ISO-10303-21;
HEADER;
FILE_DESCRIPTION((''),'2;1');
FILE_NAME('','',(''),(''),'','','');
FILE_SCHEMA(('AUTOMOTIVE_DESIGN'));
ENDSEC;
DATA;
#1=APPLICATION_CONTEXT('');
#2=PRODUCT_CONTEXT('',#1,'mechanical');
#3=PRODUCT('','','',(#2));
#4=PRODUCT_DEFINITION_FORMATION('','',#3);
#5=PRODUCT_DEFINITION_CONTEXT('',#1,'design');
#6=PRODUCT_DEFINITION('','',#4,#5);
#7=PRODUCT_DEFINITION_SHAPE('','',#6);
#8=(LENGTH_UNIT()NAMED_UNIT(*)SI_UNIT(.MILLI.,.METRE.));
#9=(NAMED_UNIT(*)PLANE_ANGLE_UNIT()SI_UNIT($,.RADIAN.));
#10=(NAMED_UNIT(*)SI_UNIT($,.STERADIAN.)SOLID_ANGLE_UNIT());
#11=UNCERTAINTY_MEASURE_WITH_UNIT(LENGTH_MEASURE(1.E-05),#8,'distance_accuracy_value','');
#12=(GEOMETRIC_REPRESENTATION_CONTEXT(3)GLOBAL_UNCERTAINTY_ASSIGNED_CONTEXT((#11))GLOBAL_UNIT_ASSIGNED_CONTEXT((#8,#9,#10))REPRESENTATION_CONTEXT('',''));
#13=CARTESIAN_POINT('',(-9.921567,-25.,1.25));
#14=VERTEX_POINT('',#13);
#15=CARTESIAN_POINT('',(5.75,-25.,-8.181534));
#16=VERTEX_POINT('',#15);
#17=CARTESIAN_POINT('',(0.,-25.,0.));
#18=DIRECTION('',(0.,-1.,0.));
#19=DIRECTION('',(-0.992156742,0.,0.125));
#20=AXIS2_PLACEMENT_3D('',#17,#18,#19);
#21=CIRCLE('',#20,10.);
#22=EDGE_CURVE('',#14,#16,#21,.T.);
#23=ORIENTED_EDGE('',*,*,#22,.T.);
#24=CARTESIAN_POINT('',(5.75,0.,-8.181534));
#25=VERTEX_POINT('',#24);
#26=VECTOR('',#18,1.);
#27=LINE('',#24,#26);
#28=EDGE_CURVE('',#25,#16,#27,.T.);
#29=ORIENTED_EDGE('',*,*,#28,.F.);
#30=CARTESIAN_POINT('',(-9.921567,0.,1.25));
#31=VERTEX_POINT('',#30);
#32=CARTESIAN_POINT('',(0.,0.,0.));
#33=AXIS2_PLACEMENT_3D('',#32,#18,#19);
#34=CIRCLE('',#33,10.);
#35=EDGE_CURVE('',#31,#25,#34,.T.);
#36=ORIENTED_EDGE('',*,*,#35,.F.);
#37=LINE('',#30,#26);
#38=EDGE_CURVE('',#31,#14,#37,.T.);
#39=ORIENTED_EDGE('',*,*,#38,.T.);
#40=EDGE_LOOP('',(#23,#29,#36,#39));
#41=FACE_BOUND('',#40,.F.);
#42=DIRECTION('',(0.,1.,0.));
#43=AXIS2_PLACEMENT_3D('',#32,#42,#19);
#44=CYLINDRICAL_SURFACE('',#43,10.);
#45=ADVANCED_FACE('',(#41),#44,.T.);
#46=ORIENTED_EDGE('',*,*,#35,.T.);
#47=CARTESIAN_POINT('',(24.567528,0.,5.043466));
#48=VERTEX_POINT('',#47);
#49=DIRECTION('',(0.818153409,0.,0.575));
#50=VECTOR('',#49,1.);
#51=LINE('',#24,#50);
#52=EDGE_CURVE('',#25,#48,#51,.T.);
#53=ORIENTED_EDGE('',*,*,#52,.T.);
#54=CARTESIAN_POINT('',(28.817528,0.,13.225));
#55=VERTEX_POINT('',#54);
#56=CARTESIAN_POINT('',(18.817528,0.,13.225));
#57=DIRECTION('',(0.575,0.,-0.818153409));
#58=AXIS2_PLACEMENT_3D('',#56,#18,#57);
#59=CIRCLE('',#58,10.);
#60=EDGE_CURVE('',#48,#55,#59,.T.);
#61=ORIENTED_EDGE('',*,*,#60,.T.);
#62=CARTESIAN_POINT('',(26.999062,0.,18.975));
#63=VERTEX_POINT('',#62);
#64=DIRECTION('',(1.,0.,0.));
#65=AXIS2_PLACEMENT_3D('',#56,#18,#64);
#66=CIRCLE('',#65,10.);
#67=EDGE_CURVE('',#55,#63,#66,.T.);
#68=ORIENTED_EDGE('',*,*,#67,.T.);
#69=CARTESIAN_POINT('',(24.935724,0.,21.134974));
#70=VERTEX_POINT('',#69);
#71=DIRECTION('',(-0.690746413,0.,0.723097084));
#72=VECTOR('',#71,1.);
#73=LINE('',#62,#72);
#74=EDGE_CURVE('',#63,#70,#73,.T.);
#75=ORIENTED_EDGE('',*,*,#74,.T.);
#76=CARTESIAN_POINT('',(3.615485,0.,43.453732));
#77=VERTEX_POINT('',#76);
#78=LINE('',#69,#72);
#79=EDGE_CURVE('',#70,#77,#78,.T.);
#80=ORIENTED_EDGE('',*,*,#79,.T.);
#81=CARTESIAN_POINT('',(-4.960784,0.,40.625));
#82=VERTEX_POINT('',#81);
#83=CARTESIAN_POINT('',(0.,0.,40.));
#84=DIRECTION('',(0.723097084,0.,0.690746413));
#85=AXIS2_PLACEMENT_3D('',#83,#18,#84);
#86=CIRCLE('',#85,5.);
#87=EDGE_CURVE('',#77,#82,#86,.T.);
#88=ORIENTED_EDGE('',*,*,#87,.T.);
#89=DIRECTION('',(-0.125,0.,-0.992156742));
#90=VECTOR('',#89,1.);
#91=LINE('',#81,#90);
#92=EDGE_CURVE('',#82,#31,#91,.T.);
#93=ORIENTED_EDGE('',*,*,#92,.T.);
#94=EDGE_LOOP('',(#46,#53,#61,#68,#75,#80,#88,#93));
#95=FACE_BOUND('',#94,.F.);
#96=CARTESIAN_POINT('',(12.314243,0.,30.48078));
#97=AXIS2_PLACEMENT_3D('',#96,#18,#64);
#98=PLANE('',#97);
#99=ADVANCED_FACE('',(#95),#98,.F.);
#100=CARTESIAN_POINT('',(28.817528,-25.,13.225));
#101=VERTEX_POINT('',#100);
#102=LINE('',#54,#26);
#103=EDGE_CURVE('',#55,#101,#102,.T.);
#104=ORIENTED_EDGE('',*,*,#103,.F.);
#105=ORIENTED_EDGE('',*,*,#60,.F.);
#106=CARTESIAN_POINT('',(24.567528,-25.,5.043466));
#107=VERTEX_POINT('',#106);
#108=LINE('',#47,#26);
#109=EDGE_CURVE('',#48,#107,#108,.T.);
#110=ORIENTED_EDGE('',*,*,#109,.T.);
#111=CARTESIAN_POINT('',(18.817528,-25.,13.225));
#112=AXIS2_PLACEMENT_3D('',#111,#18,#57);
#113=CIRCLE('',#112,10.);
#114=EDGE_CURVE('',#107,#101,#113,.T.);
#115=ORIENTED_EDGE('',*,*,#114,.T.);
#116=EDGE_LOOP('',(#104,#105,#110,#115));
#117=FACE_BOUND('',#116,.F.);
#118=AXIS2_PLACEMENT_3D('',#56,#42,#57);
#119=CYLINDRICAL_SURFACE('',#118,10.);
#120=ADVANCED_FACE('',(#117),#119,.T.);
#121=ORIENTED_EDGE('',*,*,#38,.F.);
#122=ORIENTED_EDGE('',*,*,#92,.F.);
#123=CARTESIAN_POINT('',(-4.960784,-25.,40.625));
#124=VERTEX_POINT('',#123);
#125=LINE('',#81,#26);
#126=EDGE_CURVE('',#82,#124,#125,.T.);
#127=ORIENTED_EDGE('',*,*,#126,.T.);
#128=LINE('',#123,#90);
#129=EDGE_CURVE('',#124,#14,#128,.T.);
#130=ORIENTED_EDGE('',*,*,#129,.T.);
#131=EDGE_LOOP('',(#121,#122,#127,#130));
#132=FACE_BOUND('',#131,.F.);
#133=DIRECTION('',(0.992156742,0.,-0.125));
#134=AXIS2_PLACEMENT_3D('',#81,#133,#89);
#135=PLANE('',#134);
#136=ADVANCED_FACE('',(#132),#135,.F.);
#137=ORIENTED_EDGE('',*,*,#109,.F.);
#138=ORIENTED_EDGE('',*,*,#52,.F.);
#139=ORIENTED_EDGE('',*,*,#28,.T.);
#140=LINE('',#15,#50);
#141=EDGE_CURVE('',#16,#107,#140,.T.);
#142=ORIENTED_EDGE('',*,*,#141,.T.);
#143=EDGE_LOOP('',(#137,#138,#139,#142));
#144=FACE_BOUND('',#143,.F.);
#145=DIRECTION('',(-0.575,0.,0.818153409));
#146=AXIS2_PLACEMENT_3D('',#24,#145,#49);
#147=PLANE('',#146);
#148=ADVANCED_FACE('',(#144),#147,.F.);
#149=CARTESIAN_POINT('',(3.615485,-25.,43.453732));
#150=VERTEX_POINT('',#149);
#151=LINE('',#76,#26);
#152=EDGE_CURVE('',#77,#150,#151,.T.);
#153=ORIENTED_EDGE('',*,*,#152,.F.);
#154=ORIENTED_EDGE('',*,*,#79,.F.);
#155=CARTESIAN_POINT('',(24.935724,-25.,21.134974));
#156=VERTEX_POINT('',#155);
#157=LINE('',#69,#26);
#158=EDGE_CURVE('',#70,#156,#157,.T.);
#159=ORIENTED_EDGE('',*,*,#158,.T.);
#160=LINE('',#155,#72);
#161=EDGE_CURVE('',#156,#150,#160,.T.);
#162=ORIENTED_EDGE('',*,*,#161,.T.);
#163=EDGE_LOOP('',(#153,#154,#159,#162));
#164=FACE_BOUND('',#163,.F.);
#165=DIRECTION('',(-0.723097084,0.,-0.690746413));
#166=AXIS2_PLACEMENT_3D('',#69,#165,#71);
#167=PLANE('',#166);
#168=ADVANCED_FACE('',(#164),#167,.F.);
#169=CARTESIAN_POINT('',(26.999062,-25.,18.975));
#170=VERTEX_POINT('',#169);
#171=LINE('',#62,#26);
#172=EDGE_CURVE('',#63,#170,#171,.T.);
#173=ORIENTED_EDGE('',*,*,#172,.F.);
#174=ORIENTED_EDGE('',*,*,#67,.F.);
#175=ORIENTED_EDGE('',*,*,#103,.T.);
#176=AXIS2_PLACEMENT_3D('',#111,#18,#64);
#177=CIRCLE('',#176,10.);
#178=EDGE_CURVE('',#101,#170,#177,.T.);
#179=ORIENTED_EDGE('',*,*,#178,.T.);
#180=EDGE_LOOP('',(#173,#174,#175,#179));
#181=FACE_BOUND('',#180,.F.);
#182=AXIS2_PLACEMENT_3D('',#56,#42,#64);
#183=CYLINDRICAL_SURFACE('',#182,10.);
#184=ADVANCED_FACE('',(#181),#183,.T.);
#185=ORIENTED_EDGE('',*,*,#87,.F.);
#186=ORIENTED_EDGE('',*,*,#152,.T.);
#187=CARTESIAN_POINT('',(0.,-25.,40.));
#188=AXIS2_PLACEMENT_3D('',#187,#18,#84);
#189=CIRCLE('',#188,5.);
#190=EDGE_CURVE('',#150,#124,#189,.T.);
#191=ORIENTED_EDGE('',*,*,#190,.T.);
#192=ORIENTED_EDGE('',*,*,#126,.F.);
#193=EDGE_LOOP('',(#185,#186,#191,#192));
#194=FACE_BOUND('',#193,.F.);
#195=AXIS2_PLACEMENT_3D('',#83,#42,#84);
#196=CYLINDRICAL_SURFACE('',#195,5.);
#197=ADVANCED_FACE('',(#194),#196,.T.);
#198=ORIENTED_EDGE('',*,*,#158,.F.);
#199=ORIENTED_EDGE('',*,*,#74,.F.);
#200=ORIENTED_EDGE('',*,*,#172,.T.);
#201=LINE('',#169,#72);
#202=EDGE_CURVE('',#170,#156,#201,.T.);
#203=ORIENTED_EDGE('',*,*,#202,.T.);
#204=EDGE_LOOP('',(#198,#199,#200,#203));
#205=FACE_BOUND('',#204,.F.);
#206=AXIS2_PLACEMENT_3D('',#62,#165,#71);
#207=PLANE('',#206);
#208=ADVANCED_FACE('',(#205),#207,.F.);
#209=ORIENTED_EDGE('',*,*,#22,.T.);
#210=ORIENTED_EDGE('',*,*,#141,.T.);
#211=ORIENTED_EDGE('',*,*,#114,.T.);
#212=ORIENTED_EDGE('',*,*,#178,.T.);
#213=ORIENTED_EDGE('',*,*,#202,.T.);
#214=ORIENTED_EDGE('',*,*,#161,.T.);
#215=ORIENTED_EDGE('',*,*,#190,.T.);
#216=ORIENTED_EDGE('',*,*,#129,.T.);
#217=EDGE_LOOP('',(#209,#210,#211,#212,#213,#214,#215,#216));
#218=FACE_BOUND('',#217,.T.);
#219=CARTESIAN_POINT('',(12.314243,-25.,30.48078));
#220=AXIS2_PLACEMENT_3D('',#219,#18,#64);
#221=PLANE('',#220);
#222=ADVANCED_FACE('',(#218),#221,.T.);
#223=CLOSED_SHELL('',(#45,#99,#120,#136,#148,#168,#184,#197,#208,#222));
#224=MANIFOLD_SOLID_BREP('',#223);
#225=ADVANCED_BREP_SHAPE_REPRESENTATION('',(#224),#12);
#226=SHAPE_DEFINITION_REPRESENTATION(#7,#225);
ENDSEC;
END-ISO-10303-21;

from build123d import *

# Parameters (mm, degrees)
F1_DEPTH = 25


# Not quite as in the source:
# - a feature names something its author has since deleted; it is built from what else it names


with BuildPart() as f1:
    # F0 (on Front) → F1 (new body)
    with BuildSketch(Plane.XZ):
        with BuildLine():
            ThreePointArc((5, 40), (4.4370598373, 37.6951138857), (2.875, 35.909232957))
            Line((2.875, 35.909232957), (13.0675283977, 21.406534086))
            ThreePointArc((13.0675283977, 21.406534086), (19.0462821804, 23.222383243), (24.9357240699, 21.1349735599))
            Line((24.9357240699, 21.1349735599), (3.6154854181, 43.4537320671))
            ThreePointArc((3.6154854181, 43.4537320671), (4.6409819592, 41.8604532928), (5, 40))
        make_face()
        with BuildLine():
            ThreePointArc((-9.9215674165, 1.25), (-6.6143782777, 7.5), (0, 10))
            Line((0, 10), (0, 35))
            ThreePointArc((0, 35), (-3.75, 36.6928108612), (-4.9607837082, 40.625))
            Line((-4.9607837082, 40.625), (-9.9215674165, 1.25))
        make_face()
        with BuildLine():
            Line((0, 35), (0, 10))
            ThreePointArc((0, 10), (4.6097722286, 8.8741196746), (8.181534086, 5.75))
            Line((8.181534086, 5.75), (10.6359943118, 7.475))
            ThreePointArc((10.6359943118, 7.475), (8.9664461732, 14.9443542409), (13.0675283977, 21.406534086))
            Line((13.0675283977, 21.406534086), (2.875, 35.909232957))
            ThreePointArc((2.875, 35.909232957), (1.5076744982, 35.2327242992), (0, 35))
        make_face()
        with BuildLine():
            Line((0, 40), (0, 35))
            ThreePointArc((0, 35), (1.5076744982, 35.2327242992), (2.875, 35.909232957))
            Line((2.875, 35.909232957), (0, 40))
        make_face()
        with BuildLine():
            Line((5.75, -8.181534086), (0, 0))
            Line((0, 0), (0, 10))
            ThreePointArc((0, 10), (-6.6143782777, 7.5), (-9.9215674165, 1.25))
            ThreePointArc((-9.9215674165, 1.25), (-5.1564476611, -8.5680247151), (5.75, -8.181534086))
        make_face()
        with BuildLine():
            Line((0, 10), (0, 0))
            Line((0, 0), (8.181534086, 5.75))
            ThreePointArc((8.181534086, 5.75), (4.6097722286, 8.8741196746), (0, 10))
        make_face()
        with BuildLine():
            Line((18.8175283977, 13.225), (24.5675283977, 5.043465914))
            ThreePointArc((24.5675283977, 5.043465914), (27.6916480724, 8.6152277714), (28.8175283977, 13.225))
            ThreePointArc((28.8175283977, 13.225), (28.3520797994, 16.2403489964), (26.9990624837, 18.975))
            Line((26.9990624837, 18.975), (18.8175283977, 13.225))
        make_face()
        with BuildLine():
            ThreePointArc((13.0675283977, 21.406534086), (8.9664461732, 14.9443542409), (10.6359943118, 7.475))
            Line((10.6359943118, 7.475), (18.8175283977, 13.225))
            Line((18.8175283977, 13.225), (13.0675283977, 21.406534086))
        make_face()
        with BuildLine():
            Line((13.0675283977, 21.406534086), (18.8175283977, 13.225))
            Line((18.8175283977, 13.225), (26.9990624837, 18.975))
            Line((26.9990624837, 18.975), (24.9357240699, 21.1349735599))
            ThreePointArc((24.9357240699, 21.1349735599), (19.0462821804, 23.222383243), (13.0675283977, 21.406534086))
        make_face()
        with BuildLine():
            Line((10.6359943118, 7.475), (8.181534086, 5.75))
            ThreePointArc((8.181534086, 5.75), (9.5345514016, 3.0153489964), (10, 0))
            ThreePointArc((10, 0), (8.8741196746, -4.6097722286), (5.75, -8.181534086))
            Line((5.75, -8.181534086), (24.5675283977, 5.043465914))
            ThreePointArc((24.5675283977, 5.043465914), (17.0981741569, 3.3739177755), (10.6359943118, 7.475))
        make_face()
        with BuildLine():
            Line((8.181534086, 5.75), (0, 0))
            Line((0, 0), (5.75, -8.181534086))
            ThreePointArc((5.75, -8.181534086), (8.8741196746, -4.6097722286), (10, 0))
            ThreePointArc((10, 0), (9.5345514016, 3.0153489964), (8.181534086, 5.75))
        make_face()
        with BuildLine():
            Line((18.8175283977, 13.225), (10.6359943118, 7.475))
            ThreePointArc((10.6359943118, 7.475), (17.0981741569, 3.3739177755), (24.5675283977, 5.043465914))
            Line((24.5675283977, 5.043465914), (18.8175283977, 13.225))
        make_face()
        with BuildLine():
            ThreePointArc((-4.9607837082, 40.625), (-3.75, 36.6928108612), (0, 35))
            Line((0, 35), (0, 40))
            Line((0, 40), (2.875, 35.909232957))
            ThreePointArc((2.875, 35.909232957), (4.4370598373, 37.6951138857), (5, 40))
            ThreePointArc((5, 40), (4.6409819592, 41.8604532928), (3.6154854181, 43.4537320671))
            ThreePointArc((3.6154854181, 43.4537320671), (-1.566169898, 44.7483799185), (-4.9607837082, 40.625))
        make_face()
    extrude(amount=F1_DEPTH)


solid = f1.part
